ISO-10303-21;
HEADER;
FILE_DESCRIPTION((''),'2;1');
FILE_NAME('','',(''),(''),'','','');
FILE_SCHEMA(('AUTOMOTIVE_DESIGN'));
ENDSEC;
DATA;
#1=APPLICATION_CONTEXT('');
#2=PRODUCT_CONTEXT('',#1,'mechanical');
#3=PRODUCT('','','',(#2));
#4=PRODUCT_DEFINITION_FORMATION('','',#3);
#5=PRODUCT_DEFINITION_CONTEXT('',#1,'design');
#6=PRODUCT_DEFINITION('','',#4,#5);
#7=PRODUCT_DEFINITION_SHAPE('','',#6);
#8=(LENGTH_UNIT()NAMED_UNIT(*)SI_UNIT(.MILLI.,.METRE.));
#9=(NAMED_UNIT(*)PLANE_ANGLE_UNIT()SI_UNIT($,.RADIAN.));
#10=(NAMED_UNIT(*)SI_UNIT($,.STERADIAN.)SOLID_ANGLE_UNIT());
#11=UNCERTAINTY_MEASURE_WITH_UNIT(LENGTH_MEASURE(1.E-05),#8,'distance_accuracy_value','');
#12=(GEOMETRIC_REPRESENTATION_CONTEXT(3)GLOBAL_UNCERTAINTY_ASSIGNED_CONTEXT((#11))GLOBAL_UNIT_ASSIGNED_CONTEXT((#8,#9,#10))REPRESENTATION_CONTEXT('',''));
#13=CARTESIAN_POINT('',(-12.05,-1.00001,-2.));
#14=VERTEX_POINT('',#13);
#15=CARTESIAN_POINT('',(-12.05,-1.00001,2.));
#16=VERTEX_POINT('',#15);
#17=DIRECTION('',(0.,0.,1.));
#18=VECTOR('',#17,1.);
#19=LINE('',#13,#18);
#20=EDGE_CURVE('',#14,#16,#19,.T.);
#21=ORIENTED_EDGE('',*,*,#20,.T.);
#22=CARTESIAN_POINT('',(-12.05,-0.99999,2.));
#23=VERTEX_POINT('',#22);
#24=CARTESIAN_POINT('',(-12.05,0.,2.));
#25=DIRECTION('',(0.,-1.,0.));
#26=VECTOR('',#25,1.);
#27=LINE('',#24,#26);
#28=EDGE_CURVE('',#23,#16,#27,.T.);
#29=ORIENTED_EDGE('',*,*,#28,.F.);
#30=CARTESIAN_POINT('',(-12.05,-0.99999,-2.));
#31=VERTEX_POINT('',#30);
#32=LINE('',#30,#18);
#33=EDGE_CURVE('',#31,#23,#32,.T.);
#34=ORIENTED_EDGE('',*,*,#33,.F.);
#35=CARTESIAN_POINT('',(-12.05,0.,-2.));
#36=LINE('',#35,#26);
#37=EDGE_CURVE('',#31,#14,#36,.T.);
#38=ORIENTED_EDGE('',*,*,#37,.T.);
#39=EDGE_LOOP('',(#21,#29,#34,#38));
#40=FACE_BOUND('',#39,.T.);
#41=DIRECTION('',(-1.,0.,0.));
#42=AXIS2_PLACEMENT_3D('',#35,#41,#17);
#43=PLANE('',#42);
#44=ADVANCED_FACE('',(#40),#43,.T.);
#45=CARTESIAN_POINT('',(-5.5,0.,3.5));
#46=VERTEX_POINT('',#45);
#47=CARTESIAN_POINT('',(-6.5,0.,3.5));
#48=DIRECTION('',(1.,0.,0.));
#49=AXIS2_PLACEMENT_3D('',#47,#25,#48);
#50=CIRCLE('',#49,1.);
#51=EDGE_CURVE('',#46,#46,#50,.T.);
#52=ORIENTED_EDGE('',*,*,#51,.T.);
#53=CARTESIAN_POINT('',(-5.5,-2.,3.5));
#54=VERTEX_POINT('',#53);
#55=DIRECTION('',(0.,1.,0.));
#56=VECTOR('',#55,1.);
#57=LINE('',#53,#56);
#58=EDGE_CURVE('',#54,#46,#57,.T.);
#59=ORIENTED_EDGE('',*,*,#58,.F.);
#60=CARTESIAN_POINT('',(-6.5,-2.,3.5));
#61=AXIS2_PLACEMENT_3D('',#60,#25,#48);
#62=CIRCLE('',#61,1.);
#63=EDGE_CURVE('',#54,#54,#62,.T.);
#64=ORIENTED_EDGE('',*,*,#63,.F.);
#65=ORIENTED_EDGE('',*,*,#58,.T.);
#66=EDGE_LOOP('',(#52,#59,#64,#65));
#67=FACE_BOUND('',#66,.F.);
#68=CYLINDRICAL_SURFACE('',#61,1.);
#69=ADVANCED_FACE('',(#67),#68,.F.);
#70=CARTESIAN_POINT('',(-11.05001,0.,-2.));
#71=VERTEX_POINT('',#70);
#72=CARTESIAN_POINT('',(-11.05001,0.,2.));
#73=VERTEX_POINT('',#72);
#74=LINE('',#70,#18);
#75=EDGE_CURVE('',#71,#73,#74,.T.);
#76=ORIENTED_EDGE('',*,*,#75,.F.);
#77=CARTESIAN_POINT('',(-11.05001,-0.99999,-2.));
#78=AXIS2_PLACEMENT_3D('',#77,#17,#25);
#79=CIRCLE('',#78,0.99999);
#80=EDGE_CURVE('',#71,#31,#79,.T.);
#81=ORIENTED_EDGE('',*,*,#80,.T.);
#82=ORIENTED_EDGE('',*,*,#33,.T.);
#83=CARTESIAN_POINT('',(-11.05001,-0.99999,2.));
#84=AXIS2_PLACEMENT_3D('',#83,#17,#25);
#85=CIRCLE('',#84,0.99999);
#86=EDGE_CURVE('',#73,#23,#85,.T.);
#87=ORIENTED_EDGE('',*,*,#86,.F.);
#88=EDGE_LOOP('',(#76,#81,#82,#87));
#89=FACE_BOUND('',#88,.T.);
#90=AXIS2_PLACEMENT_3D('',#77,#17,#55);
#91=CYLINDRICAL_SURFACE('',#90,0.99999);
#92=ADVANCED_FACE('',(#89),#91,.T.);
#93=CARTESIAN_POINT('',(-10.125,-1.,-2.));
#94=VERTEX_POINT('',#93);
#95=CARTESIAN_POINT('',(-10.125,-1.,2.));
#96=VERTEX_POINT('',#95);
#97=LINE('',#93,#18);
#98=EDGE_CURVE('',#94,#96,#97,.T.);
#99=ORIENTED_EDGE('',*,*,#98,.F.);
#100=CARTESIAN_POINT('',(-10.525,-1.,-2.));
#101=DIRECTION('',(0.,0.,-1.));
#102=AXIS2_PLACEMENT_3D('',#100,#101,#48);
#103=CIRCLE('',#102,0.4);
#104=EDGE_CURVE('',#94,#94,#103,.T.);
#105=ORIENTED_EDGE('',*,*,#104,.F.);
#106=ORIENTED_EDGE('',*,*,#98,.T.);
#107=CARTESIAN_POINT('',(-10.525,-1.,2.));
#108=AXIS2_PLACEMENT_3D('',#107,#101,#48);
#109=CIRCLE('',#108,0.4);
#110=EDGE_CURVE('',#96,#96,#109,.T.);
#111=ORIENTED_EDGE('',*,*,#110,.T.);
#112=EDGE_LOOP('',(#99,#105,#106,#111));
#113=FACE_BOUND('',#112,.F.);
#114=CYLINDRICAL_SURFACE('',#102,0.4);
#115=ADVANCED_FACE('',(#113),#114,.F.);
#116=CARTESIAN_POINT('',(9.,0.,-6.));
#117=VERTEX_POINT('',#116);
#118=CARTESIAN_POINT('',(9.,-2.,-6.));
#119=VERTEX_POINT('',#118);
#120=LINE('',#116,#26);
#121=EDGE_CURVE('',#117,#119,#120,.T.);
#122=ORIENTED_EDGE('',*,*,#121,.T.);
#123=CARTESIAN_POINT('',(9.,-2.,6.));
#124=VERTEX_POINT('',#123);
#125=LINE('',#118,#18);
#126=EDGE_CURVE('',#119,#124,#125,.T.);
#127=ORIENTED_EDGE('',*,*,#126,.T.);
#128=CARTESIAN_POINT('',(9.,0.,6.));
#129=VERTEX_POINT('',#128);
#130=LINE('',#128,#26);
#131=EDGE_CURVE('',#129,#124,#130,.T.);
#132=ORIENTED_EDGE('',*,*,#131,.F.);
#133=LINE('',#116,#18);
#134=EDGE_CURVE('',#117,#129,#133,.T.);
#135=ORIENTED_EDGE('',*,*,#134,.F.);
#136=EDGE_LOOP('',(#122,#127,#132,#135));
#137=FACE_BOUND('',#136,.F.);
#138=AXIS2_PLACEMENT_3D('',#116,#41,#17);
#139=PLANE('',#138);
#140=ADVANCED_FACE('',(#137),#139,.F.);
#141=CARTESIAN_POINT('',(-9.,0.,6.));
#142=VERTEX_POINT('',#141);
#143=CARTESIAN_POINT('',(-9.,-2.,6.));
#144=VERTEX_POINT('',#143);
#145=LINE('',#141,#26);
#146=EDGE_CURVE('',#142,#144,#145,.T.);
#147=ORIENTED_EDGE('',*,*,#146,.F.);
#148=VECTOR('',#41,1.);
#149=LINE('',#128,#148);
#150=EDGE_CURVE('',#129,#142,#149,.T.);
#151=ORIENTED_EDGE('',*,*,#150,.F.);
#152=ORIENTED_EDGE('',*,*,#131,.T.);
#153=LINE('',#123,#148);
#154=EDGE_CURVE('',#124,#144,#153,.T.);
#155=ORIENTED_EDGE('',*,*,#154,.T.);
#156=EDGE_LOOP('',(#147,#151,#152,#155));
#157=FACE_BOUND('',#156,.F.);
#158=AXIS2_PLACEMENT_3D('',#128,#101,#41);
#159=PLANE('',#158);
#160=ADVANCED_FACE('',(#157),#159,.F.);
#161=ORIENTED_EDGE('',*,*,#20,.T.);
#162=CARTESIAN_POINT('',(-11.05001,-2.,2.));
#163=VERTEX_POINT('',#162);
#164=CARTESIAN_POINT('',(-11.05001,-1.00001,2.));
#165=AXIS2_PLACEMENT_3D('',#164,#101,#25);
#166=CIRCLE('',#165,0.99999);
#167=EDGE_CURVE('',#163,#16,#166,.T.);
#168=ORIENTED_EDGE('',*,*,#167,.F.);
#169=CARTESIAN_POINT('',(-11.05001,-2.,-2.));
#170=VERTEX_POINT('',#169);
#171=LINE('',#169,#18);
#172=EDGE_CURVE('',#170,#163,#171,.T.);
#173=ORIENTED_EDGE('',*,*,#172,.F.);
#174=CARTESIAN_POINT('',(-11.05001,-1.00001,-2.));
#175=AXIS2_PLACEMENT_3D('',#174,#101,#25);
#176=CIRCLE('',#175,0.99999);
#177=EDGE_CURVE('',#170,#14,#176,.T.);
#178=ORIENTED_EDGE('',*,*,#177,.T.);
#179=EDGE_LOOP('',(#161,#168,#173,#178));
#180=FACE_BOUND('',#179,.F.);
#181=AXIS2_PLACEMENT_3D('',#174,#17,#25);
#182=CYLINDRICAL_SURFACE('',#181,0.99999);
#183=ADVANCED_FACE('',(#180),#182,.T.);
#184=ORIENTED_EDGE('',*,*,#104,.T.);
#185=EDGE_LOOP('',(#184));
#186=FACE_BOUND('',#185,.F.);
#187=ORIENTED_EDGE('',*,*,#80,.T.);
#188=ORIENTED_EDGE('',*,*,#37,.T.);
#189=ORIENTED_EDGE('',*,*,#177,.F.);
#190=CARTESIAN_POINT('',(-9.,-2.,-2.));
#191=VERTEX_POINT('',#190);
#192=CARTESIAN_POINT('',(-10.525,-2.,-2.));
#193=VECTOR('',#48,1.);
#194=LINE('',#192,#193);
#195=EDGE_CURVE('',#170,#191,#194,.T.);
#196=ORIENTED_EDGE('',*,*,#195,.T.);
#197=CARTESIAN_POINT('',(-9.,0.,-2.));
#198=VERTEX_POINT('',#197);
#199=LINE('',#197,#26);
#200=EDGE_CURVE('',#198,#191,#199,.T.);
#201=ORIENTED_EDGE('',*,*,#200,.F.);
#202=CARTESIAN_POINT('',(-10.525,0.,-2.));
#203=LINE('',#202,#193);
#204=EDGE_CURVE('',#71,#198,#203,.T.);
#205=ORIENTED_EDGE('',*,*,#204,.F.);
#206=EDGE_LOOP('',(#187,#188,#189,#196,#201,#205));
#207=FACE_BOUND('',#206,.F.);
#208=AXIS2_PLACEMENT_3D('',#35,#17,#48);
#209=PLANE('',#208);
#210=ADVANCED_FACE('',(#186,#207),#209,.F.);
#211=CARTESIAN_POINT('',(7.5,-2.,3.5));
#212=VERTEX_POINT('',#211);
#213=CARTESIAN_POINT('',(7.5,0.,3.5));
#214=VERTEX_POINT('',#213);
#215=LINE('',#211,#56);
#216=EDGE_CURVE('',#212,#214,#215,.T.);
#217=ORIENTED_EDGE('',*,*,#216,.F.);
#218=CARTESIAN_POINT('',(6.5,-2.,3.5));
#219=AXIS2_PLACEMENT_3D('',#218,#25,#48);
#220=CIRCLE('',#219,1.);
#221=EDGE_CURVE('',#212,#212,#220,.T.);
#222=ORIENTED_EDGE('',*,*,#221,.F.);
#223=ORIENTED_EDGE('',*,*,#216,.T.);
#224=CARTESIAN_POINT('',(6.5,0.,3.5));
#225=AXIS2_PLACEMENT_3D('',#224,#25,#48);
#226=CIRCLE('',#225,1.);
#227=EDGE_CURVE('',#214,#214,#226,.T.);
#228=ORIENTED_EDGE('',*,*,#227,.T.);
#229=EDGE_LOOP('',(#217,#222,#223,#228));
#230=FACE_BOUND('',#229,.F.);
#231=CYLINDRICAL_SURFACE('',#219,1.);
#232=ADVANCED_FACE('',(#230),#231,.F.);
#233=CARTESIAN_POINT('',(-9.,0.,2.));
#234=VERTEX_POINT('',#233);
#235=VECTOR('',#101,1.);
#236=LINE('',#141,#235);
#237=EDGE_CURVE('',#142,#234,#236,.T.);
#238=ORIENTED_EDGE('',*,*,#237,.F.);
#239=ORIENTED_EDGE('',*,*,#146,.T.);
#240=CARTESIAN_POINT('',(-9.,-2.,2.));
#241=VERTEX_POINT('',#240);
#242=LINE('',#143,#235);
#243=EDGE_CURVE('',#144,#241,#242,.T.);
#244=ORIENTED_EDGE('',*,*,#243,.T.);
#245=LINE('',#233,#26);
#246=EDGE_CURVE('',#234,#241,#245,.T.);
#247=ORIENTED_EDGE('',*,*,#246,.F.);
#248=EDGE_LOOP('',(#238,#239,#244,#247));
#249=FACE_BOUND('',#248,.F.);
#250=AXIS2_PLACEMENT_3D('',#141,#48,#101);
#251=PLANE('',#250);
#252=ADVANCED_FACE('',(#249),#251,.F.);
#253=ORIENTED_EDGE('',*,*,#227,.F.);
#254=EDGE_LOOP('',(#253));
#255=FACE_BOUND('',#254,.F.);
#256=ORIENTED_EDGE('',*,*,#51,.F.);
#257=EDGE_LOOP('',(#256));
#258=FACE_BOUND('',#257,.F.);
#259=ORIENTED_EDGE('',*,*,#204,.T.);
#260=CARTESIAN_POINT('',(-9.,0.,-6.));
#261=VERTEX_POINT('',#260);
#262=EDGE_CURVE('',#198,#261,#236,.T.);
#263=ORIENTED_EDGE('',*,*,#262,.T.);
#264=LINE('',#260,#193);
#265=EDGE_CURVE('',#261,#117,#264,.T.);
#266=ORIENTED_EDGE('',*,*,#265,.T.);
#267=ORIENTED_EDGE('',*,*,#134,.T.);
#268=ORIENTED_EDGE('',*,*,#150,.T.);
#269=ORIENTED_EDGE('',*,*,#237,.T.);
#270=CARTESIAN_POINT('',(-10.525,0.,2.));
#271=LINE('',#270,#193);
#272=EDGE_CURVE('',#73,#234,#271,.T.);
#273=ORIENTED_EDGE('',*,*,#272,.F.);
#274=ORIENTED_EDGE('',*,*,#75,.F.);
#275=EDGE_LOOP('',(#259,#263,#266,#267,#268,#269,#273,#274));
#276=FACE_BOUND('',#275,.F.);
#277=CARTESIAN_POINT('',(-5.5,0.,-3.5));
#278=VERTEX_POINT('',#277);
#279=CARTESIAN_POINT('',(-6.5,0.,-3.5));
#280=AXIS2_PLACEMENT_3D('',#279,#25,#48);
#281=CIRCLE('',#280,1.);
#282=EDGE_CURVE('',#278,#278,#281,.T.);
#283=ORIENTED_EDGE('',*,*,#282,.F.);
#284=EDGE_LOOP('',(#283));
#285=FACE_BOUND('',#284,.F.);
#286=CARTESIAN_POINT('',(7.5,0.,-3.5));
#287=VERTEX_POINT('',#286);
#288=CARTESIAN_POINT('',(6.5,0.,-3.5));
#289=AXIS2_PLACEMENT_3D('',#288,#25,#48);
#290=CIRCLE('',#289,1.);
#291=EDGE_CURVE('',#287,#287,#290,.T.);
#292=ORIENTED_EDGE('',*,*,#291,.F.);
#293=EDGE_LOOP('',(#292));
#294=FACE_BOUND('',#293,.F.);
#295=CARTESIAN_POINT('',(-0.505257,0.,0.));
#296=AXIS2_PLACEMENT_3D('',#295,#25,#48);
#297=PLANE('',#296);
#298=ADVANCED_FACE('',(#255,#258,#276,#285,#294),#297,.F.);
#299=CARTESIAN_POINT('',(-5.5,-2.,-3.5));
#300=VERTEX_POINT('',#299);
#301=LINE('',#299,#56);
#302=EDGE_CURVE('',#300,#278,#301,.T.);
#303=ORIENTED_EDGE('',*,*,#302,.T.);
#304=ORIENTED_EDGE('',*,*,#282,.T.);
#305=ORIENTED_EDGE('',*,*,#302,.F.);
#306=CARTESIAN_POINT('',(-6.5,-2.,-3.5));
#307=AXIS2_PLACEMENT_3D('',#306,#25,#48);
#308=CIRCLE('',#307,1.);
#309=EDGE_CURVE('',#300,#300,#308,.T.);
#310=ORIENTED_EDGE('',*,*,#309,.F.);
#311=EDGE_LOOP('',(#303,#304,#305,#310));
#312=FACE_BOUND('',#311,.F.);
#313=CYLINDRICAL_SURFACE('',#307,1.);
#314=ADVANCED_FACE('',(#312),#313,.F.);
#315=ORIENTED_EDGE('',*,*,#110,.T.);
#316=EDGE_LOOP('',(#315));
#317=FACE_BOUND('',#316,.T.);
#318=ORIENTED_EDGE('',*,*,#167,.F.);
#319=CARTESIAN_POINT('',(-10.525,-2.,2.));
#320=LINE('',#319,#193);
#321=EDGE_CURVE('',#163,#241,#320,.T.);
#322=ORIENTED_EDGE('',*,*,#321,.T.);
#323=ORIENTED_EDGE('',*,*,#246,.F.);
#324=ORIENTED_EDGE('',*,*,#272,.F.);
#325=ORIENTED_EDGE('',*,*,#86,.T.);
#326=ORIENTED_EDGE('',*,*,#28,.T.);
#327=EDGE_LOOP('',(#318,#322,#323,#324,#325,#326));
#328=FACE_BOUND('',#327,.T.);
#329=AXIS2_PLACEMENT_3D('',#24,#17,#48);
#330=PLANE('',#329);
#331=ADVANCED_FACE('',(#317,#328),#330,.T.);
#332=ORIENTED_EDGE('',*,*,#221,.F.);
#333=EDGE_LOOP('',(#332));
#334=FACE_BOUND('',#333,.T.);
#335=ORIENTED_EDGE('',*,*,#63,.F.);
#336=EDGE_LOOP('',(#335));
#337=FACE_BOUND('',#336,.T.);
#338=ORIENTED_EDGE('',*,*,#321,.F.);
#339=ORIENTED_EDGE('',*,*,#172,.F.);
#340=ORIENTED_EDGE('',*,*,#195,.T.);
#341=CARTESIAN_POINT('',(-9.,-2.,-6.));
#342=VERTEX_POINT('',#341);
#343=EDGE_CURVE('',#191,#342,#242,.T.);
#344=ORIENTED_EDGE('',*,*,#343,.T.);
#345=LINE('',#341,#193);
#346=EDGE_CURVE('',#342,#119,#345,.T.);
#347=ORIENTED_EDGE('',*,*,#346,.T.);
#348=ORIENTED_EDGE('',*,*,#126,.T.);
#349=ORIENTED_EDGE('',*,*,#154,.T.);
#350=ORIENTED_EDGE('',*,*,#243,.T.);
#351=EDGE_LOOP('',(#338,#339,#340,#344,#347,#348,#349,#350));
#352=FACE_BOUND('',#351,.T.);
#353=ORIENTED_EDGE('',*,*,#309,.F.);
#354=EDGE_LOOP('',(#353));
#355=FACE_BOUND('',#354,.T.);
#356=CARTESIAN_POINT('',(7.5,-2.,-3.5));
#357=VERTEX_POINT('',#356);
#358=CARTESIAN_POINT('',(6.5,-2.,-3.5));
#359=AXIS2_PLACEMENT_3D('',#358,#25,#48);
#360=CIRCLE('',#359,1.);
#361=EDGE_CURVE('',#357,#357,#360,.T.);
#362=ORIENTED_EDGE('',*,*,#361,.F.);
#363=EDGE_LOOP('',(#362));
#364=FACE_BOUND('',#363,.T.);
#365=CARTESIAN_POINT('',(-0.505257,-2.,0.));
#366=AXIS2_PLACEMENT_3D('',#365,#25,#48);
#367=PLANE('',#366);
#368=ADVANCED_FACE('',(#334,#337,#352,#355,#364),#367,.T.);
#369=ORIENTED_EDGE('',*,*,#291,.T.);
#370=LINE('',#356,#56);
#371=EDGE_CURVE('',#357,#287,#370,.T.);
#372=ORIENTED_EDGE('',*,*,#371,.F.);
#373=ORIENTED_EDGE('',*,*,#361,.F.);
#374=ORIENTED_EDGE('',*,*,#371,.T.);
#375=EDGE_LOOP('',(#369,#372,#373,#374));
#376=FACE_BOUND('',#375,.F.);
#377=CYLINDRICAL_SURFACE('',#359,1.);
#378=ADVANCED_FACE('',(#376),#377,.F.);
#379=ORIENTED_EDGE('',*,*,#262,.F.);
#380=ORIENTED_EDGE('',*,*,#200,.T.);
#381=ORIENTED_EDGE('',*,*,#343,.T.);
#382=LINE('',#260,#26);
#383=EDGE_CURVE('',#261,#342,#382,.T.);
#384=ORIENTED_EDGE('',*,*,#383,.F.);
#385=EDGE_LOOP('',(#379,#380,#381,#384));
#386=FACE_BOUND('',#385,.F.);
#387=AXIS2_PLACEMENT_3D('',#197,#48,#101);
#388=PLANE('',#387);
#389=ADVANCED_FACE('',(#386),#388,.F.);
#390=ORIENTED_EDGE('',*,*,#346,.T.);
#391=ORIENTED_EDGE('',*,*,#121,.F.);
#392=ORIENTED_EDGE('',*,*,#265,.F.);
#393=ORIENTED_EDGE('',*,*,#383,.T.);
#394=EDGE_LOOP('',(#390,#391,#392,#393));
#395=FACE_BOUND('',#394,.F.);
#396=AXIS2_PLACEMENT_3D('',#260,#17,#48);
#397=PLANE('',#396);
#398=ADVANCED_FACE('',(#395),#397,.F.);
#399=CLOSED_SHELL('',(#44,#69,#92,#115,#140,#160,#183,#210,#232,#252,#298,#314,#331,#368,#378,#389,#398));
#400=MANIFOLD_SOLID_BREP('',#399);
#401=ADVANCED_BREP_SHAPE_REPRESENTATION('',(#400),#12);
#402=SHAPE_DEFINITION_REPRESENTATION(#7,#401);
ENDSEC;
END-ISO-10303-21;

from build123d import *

# Parameters (mm, degrees)
F0_W     = 3.05
F0_H     = 4
F1_DEPTH = 2
F2_R     = 0.4
F3_DEPTH = 25
F4_R     = 1
F5_DEPTH = 25
F6_R     = 0.99999


# Not quite as in the source:
# - a fillet or chamfer is up to 0.001 mm smaller than in the source, because OpenCascade refuses the exact size


with BuildPart() as f1:
    # F0 (on Front) → F1 (new body)
    with BuildSketch(Plane.XZ):
        Polygon((9, -6), (9, 6), (-9, 6), (-9, 2), (-5.95, 2), (-5.95, -2), (-9, -2), (-9, -6), align=None)
        with Locations((-7.475, 0)):
            Rectangle(F0_W, F0_H)
        with Locations((-10.525, 0)):
            Rectangle(F0_W, F0_H)
    extrude(amount=F1_DEPTH)

    # F2 (on face) → F3 (cut)
    with BuildSketch(Plane(origin=(0, 0, -2), x_dir=(1, 0, 0), z_dir=(0, 0, -1))):
        with Locations((-10.525, 1)):
            Circle(F2_R)
    extrude(amount=-F3_DEPTH, mode=Mode.SUBTRACT)

    # F4 (on face) → F5 (cut)
    with BuildSketch(Plane.XZ.offset(2)):
        with Locations((-6.5, 3.5)):
            Circle(F4_R)
        with Locations((6.5, 3.5)):
            Circle(F4_R)
        with Locations((6.5, -3.5)):
            Circle(F4_R)
        with Locations((-6.5, -3.5)):
            Circle(F4_R)
    extrude(amount=-F5_DEPTH, mode=Mode.SUBTRACT)

    # F6 (radius 1 in the source; OpenCascade refuses exactly that, so slightly less here)
    f6_edges = [f1.edges().sort_by_distance(p)[0] for p in [
        (-12.05, -2, 0),
        (-12.05, 0, 0),
    ]]
    fillet(f6_edges, radius=F6_R)


solid = f1.part
